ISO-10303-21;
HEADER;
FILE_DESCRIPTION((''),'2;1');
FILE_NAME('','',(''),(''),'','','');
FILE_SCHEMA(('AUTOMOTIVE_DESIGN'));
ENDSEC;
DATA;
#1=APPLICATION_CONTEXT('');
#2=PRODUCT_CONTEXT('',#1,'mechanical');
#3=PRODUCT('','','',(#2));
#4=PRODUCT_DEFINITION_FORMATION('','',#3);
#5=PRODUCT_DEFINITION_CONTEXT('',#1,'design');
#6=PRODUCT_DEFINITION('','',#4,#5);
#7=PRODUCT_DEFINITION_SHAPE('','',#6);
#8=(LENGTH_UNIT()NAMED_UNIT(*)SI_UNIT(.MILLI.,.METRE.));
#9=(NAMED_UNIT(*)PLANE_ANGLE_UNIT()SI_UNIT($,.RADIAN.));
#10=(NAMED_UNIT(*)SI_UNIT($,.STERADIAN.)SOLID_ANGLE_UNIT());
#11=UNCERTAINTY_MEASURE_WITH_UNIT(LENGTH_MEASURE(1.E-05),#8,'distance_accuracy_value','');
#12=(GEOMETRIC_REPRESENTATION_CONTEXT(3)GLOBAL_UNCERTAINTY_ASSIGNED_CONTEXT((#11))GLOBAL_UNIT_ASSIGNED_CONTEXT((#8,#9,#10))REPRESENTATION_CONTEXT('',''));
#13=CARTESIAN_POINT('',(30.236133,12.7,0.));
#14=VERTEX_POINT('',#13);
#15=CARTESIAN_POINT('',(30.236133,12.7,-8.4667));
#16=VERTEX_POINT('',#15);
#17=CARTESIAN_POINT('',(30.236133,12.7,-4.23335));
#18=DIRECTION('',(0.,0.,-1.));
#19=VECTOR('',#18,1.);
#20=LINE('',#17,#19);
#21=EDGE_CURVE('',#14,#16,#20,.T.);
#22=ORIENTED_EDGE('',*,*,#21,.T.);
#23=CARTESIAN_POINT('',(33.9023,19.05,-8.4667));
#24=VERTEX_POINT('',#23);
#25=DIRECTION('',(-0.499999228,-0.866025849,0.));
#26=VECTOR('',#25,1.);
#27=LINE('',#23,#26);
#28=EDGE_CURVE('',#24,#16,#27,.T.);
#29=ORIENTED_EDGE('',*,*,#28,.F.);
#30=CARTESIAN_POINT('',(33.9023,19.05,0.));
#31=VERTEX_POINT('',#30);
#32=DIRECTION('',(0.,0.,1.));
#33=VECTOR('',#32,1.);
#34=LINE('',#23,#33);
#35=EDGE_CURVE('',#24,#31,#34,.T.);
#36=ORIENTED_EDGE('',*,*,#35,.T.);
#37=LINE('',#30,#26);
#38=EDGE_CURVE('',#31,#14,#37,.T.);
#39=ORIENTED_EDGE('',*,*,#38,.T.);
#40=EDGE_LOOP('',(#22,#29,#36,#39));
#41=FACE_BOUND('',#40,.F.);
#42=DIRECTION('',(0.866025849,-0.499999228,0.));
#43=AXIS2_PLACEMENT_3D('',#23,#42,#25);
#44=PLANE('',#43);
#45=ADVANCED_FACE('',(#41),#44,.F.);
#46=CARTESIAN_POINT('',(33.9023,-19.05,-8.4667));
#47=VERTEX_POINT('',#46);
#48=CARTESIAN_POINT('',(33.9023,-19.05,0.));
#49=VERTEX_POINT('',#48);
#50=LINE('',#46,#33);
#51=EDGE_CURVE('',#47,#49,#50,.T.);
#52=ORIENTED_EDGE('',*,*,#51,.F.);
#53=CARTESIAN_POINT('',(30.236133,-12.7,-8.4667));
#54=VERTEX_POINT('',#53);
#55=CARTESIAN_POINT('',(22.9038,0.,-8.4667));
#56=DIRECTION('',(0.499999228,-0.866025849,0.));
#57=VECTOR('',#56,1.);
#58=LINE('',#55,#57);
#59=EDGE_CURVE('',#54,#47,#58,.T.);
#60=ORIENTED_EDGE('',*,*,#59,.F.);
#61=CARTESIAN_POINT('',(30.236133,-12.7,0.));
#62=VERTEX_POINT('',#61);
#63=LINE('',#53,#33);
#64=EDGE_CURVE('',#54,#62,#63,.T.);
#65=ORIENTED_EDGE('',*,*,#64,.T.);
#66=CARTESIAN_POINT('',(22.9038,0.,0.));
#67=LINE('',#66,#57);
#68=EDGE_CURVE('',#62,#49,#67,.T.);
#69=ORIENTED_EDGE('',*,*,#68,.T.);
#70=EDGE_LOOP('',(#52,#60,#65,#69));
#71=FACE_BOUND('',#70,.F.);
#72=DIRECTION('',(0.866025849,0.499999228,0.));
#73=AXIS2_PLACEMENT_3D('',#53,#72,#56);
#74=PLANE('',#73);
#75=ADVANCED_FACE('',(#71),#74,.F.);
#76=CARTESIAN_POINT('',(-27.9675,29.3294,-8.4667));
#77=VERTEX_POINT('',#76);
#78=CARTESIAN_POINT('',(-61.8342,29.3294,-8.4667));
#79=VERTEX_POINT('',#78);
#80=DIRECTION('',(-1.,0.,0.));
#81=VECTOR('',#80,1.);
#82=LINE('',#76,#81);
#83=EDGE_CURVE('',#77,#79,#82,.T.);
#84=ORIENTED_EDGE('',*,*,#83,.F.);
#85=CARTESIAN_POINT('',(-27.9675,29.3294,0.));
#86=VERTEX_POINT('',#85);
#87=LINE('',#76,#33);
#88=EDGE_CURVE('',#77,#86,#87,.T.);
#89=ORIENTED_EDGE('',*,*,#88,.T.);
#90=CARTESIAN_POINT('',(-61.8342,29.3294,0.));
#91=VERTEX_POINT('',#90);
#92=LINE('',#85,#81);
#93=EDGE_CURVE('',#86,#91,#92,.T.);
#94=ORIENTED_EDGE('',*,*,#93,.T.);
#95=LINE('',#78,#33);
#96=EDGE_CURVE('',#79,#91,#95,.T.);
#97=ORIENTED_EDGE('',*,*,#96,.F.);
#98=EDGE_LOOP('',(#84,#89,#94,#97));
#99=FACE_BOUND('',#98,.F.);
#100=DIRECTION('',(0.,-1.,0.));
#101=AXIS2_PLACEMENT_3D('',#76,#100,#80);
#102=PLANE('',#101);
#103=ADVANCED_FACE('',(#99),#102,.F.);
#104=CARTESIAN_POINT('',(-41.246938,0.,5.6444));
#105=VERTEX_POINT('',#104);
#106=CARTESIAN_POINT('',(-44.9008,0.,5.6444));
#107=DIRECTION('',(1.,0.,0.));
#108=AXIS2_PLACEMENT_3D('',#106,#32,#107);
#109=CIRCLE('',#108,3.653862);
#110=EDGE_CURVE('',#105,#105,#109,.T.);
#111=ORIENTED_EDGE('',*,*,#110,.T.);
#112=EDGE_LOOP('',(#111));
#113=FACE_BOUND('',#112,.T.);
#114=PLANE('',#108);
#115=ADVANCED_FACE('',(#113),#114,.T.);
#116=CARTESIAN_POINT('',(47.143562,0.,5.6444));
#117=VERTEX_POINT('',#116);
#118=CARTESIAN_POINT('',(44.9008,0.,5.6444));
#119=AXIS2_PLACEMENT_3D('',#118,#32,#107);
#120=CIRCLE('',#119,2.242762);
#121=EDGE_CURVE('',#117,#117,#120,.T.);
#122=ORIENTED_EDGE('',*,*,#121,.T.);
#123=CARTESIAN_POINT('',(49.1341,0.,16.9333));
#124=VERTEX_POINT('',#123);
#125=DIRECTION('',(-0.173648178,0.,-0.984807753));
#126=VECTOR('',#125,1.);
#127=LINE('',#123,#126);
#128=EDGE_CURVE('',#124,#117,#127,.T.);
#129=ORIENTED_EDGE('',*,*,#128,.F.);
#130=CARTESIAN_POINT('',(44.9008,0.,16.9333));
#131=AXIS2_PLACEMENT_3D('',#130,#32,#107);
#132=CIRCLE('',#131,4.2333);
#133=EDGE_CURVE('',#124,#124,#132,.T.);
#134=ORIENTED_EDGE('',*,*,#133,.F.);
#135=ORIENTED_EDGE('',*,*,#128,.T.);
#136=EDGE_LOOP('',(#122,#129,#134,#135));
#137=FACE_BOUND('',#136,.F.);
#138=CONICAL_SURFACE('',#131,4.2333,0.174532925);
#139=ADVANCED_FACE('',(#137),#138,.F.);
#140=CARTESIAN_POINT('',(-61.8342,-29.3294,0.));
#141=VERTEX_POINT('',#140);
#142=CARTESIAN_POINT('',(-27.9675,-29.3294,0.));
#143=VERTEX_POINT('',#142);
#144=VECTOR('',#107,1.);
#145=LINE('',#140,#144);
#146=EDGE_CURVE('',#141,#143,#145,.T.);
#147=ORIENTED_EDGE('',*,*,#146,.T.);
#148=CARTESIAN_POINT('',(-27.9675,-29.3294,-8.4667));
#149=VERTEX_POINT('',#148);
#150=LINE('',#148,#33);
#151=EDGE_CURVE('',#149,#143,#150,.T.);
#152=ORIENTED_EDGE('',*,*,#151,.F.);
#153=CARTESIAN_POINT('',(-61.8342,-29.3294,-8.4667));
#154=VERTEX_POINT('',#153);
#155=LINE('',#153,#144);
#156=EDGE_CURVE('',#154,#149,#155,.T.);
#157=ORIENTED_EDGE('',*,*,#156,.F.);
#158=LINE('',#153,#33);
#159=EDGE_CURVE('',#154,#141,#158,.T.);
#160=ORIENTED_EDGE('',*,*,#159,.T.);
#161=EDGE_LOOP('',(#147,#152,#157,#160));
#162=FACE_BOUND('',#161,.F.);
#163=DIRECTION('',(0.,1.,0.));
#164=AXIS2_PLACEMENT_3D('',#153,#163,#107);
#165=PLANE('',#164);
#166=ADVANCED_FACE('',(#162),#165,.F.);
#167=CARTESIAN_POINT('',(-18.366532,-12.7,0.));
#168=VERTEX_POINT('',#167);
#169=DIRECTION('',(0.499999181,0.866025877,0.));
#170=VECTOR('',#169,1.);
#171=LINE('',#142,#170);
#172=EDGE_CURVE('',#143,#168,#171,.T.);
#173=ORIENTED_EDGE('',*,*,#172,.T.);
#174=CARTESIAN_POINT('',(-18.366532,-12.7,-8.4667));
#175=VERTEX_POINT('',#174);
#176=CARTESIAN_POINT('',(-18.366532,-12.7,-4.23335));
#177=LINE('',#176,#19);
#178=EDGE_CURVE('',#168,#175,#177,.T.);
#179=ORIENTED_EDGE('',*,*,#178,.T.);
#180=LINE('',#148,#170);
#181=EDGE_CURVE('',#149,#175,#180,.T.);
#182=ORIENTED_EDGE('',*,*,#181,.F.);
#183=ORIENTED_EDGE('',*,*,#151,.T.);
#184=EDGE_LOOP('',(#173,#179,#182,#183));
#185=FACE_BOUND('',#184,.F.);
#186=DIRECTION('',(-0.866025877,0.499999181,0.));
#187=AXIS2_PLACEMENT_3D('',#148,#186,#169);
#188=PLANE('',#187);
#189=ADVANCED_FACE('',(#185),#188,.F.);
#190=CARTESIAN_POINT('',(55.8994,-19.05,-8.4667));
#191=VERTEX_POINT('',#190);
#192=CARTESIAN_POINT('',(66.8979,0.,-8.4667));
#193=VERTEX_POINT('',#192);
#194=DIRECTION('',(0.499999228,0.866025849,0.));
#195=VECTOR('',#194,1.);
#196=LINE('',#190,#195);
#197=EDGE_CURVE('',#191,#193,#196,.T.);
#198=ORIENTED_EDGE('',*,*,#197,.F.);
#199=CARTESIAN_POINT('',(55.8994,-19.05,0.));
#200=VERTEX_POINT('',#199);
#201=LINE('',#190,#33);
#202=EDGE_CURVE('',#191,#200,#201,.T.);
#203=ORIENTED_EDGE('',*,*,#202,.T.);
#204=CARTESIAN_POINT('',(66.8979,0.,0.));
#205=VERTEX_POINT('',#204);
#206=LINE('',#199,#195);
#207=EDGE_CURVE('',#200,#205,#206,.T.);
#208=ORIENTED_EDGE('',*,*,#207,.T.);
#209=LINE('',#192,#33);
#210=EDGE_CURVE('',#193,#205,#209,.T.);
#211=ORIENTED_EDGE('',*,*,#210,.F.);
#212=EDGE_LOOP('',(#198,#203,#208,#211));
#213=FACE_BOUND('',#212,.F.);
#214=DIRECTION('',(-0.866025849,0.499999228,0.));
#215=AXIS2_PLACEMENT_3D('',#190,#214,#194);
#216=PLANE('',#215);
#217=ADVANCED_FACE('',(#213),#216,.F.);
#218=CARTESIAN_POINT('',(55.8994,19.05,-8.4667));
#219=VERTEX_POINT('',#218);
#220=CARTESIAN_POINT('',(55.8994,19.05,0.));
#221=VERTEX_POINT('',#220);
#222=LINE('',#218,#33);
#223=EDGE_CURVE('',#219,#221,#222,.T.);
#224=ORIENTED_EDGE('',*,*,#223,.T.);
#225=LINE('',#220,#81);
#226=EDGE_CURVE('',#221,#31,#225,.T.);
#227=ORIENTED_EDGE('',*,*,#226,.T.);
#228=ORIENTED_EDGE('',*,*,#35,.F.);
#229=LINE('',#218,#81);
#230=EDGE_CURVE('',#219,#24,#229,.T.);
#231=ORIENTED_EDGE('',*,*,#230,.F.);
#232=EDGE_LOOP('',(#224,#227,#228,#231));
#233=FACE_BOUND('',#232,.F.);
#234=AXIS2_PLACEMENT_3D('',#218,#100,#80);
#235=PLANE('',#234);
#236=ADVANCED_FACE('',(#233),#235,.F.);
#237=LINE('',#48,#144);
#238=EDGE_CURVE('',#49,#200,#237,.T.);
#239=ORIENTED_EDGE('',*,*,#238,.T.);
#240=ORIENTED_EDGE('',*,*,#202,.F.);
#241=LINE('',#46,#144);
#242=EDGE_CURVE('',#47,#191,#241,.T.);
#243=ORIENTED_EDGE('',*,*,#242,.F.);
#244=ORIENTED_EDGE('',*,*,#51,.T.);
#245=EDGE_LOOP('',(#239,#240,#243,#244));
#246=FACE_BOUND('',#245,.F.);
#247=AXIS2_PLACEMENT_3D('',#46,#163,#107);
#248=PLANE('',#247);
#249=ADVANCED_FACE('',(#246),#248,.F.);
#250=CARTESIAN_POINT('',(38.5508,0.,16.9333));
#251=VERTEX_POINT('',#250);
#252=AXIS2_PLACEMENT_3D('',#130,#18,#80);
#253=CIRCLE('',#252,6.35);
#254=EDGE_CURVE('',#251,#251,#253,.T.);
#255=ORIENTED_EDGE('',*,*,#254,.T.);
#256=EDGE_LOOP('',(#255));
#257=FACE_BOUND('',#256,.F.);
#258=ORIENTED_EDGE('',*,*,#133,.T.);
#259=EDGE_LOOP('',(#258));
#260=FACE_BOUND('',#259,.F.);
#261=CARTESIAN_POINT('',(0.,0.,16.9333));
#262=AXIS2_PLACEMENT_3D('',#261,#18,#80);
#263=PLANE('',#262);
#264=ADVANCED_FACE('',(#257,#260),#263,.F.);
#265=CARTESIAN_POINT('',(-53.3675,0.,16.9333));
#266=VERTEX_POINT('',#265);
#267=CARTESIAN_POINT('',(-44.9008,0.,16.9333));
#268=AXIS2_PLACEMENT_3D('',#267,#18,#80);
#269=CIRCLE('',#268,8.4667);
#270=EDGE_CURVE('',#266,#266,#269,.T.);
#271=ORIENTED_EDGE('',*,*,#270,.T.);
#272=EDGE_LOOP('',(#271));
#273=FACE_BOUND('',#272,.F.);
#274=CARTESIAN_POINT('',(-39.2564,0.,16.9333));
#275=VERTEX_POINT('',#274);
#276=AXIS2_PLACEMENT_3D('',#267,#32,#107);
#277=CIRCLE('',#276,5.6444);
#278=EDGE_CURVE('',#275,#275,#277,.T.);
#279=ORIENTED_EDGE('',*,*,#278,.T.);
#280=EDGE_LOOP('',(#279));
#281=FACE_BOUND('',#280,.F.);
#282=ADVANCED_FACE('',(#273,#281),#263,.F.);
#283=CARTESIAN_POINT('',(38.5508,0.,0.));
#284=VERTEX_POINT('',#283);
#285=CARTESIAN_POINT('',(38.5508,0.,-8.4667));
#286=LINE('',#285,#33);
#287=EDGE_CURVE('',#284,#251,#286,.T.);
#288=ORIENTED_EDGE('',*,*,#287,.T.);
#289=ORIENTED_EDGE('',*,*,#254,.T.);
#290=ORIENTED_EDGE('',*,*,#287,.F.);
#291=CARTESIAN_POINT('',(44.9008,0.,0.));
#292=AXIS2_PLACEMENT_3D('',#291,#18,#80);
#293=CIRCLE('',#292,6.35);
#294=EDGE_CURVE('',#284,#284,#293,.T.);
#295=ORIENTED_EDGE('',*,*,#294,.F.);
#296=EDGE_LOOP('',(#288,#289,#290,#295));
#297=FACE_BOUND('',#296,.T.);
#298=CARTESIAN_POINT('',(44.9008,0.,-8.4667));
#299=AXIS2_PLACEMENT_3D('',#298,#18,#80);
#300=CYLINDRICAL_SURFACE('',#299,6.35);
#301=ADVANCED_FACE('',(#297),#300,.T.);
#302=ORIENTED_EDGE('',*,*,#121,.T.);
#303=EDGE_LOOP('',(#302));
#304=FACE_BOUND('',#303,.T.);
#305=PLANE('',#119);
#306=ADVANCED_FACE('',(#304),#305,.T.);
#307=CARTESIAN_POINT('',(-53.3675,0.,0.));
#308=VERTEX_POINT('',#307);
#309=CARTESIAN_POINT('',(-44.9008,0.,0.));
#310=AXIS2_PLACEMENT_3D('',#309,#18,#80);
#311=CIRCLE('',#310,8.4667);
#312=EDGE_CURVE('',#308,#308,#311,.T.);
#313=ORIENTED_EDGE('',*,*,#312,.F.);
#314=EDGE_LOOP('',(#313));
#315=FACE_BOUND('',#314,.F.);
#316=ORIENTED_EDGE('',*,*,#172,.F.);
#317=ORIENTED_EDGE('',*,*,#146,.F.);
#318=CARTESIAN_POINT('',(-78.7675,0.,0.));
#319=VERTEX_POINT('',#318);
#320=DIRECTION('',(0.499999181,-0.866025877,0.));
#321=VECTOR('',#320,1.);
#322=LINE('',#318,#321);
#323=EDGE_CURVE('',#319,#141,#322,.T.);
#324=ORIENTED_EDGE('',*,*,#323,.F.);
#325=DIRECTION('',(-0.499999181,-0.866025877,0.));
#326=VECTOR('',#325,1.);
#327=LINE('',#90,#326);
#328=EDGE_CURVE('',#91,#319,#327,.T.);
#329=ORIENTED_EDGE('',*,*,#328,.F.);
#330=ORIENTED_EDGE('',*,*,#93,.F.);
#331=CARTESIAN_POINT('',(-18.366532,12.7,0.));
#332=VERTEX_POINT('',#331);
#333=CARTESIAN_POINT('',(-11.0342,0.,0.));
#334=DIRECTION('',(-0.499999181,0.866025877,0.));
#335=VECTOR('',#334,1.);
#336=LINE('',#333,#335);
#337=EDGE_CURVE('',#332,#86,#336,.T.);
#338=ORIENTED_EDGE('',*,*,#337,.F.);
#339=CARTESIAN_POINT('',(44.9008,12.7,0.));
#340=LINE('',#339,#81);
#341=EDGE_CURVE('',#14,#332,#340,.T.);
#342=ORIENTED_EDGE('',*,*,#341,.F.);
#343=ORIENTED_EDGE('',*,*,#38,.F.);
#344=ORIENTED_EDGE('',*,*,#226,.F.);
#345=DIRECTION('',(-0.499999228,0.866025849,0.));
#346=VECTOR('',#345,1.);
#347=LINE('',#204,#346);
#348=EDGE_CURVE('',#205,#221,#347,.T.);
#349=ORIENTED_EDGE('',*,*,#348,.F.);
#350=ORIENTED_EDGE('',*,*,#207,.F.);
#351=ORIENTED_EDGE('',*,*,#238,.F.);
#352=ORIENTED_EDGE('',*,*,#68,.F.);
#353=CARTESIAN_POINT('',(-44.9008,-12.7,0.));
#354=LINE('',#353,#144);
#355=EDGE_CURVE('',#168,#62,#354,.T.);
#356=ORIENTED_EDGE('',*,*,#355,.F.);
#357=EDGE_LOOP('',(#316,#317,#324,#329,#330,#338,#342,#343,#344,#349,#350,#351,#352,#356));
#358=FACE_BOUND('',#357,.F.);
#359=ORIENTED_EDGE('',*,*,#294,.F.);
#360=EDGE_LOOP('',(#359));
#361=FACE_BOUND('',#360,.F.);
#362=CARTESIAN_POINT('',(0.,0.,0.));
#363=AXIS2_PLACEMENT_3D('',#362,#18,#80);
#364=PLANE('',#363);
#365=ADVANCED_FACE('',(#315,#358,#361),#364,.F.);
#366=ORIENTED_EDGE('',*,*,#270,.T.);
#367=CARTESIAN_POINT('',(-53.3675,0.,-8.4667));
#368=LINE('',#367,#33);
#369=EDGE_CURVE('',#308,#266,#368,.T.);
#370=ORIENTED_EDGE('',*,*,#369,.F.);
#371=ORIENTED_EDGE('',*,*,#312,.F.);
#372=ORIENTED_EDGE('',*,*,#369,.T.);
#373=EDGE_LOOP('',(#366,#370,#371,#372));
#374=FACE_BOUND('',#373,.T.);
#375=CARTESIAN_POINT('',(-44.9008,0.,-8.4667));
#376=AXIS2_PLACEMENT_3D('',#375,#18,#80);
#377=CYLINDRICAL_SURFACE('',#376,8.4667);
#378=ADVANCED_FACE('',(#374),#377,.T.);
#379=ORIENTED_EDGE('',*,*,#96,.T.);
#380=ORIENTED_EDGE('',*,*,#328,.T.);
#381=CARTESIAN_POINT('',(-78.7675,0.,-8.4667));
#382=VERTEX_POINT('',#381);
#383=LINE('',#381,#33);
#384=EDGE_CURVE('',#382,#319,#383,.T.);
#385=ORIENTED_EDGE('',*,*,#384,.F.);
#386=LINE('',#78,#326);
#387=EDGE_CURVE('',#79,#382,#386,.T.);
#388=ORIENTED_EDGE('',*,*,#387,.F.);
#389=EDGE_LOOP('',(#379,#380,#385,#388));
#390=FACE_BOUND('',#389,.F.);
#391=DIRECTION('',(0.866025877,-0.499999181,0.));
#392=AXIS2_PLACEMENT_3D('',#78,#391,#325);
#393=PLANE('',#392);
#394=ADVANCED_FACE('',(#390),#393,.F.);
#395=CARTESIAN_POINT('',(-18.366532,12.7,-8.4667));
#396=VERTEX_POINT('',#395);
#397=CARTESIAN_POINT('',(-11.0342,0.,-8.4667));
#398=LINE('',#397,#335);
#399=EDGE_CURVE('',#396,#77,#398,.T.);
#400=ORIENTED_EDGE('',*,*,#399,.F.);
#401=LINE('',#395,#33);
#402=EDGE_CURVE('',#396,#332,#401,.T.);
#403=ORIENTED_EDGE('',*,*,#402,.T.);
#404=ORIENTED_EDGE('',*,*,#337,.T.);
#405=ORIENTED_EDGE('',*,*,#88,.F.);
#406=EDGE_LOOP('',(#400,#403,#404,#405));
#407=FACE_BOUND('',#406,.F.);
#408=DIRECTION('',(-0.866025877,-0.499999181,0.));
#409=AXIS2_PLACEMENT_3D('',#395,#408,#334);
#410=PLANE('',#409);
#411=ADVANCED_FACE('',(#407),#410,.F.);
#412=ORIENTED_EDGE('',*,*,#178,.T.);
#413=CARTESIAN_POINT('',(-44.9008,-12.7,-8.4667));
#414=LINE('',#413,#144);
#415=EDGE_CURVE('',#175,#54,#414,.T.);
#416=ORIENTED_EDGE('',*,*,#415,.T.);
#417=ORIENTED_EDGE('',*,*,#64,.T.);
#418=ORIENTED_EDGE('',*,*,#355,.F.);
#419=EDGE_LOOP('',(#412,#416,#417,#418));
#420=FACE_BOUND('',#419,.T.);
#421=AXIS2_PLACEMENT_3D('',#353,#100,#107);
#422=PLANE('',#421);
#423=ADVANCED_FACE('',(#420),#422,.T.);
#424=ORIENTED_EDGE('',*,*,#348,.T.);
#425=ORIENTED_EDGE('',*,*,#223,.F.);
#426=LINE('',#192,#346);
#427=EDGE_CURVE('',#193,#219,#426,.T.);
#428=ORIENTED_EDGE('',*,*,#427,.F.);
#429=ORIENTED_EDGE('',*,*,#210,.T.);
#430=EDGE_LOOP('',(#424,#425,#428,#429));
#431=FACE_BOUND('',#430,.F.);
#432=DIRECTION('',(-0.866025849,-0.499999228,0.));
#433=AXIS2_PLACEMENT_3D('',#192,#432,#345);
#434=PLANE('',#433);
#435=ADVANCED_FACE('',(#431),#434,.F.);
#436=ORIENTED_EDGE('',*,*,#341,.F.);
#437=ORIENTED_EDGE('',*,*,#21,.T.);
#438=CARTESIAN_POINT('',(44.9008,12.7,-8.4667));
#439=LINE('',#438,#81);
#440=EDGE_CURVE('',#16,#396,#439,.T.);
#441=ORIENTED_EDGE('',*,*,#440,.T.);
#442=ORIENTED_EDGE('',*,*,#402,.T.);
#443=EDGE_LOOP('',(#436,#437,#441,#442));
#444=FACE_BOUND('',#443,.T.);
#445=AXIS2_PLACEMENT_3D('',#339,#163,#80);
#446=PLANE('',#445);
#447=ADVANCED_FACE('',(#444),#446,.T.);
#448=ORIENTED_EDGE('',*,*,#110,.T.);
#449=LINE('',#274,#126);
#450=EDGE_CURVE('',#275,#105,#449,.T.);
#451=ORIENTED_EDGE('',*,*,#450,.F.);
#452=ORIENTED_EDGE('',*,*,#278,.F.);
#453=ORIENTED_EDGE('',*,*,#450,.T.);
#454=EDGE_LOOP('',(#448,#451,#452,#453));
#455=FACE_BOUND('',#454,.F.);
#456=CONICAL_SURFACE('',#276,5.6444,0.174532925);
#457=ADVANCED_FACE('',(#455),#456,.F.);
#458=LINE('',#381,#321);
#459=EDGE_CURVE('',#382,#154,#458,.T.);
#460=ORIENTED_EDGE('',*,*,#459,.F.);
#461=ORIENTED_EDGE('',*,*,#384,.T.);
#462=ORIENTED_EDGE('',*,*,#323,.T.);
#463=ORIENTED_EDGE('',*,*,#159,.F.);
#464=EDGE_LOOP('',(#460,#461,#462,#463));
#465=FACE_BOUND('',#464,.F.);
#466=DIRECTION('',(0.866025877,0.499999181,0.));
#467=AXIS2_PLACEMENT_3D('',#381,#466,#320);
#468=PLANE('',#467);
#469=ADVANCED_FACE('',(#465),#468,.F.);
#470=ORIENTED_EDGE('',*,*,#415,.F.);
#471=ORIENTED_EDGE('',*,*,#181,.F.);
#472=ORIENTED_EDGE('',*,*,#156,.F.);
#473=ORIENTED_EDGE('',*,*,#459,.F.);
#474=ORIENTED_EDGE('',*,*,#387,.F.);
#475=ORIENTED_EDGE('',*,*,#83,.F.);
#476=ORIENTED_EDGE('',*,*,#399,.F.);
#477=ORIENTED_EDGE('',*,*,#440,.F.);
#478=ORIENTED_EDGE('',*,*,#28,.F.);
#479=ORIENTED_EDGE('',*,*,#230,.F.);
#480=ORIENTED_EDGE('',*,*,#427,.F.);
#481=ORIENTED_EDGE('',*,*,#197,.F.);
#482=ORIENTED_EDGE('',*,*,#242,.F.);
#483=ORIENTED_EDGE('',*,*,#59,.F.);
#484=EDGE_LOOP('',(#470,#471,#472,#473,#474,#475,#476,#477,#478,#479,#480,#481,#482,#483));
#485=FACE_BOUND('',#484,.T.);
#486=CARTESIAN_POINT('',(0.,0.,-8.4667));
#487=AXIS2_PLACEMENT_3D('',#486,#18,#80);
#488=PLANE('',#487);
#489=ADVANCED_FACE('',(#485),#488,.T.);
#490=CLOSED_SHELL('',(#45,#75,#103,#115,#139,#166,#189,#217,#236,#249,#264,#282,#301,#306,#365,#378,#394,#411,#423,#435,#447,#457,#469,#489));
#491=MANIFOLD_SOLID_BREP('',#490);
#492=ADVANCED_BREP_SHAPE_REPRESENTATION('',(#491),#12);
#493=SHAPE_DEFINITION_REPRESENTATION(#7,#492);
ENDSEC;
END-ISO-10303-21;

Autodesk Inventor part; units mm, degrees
ref_plane "YZ Plane" through (0, 0, 0) normal (1, 0, 0) x (0, 1, 0)
ref_plane "XZ Plane" through (0, 0, 0) normal (0, 1, 0) x (-1, 0, 0)
ref_plane "XY Plane" through (0, 0, 0) normal (0, 0, 1) x (1, 0, 0)
sketch "Sketch1" plane through (0, 0, 0) normal (0, 0, 1) x (1, 0, 0)
  circle A0 centre (-43.9941, 0) radius 9.525
  circle A1 centre (43.9941, 0) radius 6.35
  line L0 (43.9941, 0) -> (-43.9941, 0) construction
  line L1 (43.9941, 12.7) -> (-43.9941, 12.7)
  line L2 (-43.9941, -12.7) -> (43.9941, -12.7)
  arc A2 (43.9941, -12.7) -> (43.9941, 12.7) centre (43.9941, 0) ccw
  arc A3 (-43.9941, 12.7) -> (-43.9941, -12.7) centre (-43.9941, 0) ccw
  point P0 (0, 0)
  point P1 (0, 0)
  dimension "d10" = 12.7
  dimension "d11" = 19.05
  dimension "d12" = 87.9881
  dimension "d13" = 12.7
sketch "Sketch3" plane through (0, 0, 0) normal (0, 0, 1) x (1, 0, 0)
  line L0 (-44.9008, 0) -> (44.9008, 0) construction
  line L1 (-44.9008, -12.7) -> (44.9008, -12.7)
  line L2 (44.9008, 12.7) -> (-44.9008, 12.7)
  arc A0 (-44.9008, 12.7) -> (-44.9008, -12.7) centre (-44.9008, 0) ccw
  arc A1 (44.9008, -12.7) -> (44.9008, 12.7) centre (44.9008, 0) ccw
  circle A2 centre (-44.9008, 0) radius 6.35
  point P0 (0, 0)
  dimension "d23" = 44.9008
  dimension "d24" = 25.4
  dimension "d25" = 12.7
extrude "Extrusion4" add sketch "Sketch3" against normal blind 8.4667
sketch "Sketch4" plane through (0, 0, -8.4667) normal (0, 0, -1) x (-1, 0, 0)
  circle A0 centre (-44.9008, 0) radius 6.35
  arc A1 (-44.9008, 12.7) -> (-44.9008, -12.7) centre (-44.9008, 0) ccw projected
  point P0 (0, 0)
  dimension "d28" = 12.7
extrude "Extrusion5" cut sketch "Sketch4" against normal through all
sketch "Sketch5" plane through (0, 0, -8.4667) normal (0, 0, -1) x (-1, 0, 0)
  circle A0 centre (44.9008, 0) radius 6.35 projected
  line L0 (61.8342, 29.3294) -> (78.7675, 0)
  line L1 (78.7675, 0) -> (61.8342, -29.3294)
  line L2 (61.8342, -29.3294) -> (27.9675, -29.3294)
  line L3 (27.9675, -29.3294) -> (11.0342, 0)
  line L4 (11.0342, 0) -> (27.9675, 29.3294)
  line L5 (27.9675, 29.3294) -> (61.8342, 29.3294)
  line L6 (-44.9008, 12.7) -> (44.9008, 12.7) projected
  point P0 (0, 0)
  dimension "d31" = 33.8667
extrude "Extrusion6" add sketch "Sketch5" against normal up to surface (8.4667 mm away)
sketch "Sketch7" plane through (0, 0, -8.4667) normal (0, 0, -1) x (-1, 0, 0)
  circle A0 centre (-44.9008, 0) radius 6.35 projected
  circle A1 centre (-44.9008, 0) radius 12.7
  line L0 (-44.9008, -12.7) -> (18.3665, -12.7) projected
  line L1 (-66.8979, 0) -> (-55.8994, 19.05)
  line L2 (-55.8994, 19.05) -> (-33.9023, 19.05)
  line L3 (-33.9023, 19.05) -> (-22.9038, 0)
  line L4 (-22.9038, 0) -> (-33.9023, -19.05)
  line L5 (-33.9023, -19.05) -> (-55.8994, -19.05)
  line L6 (-55.8994, -19.05) -> (-66.8979, 0)
  point P0 (0, 0)
  point P1 (5.3062, -12.7)
  dimension "d48" = 38.1
extrude "Extrusion8" add sketch "Sketch7" against normal up to surface (8.4667 mm away) contours L1 L2 L3 L4 L5 L6
sketch "Sketch12" plane through (0, 0, -8.4667) normal (0, 0, -1) x (-1, 0, 0)
  circle A0 centre (44.9008, 0) radius 6.35 projected
  circle A1 centre (44.9008, 0) radius 8.4667
  point P0 (0, 0)
  dimension "d73" = 16.9333
extrude "Extrusion12" add sketch "Sketch12" against normal blind 25.4 contours A0 | A1
sketch "Sketch13" plane through (-44.9008, 0, 16.9333) normal (0, 0, 1) x (1, 0, 0)
  circle A0 centre (0, 0) radius 8.4667 projected
  circle A1 centre (0, 0) radius 8.4667 projected
  circle A2 centre (0, 0) radius 5.6444
  point P0 (44.9008, 0)
  dimension "d76" = 11.2889
extrude "Extrusion13" cut sketch "Sketch13" against normal blind 11.2889 draft -10 contours A2
sketch "Sketch14" plane through (0, 0, -8.4667) normal (0, 0, -1) x (-1, 0, 0)
  circle A0 centre (-44.9008, 0) radius 6.35 projected
  circle A1 centre (-44.9008, 0) radius 6.35
  point P0 (0, 0)
  dimension "d79" = 12.7
extrude "Extrusion14" add sketch "Sketch14" against normal blind 25.4
sketch "Sketch15" plane through (44.9008, 0, 16.9333) normal (0, 0, 1) x (1, 0, 0)
  circle A0 centre (0, 0) radius 6.35 projected
  circle A1 centre (0, 0) radius 4.2333
  point P0 (-44.9008, 0)
  dimension "d82" = 8.4667
extrude "Extrusion15" cut sketch "Sketch15" against normal blind 11.2889 draft -10 contours A1
properties part number "Frame" material "ABS Plastic"
